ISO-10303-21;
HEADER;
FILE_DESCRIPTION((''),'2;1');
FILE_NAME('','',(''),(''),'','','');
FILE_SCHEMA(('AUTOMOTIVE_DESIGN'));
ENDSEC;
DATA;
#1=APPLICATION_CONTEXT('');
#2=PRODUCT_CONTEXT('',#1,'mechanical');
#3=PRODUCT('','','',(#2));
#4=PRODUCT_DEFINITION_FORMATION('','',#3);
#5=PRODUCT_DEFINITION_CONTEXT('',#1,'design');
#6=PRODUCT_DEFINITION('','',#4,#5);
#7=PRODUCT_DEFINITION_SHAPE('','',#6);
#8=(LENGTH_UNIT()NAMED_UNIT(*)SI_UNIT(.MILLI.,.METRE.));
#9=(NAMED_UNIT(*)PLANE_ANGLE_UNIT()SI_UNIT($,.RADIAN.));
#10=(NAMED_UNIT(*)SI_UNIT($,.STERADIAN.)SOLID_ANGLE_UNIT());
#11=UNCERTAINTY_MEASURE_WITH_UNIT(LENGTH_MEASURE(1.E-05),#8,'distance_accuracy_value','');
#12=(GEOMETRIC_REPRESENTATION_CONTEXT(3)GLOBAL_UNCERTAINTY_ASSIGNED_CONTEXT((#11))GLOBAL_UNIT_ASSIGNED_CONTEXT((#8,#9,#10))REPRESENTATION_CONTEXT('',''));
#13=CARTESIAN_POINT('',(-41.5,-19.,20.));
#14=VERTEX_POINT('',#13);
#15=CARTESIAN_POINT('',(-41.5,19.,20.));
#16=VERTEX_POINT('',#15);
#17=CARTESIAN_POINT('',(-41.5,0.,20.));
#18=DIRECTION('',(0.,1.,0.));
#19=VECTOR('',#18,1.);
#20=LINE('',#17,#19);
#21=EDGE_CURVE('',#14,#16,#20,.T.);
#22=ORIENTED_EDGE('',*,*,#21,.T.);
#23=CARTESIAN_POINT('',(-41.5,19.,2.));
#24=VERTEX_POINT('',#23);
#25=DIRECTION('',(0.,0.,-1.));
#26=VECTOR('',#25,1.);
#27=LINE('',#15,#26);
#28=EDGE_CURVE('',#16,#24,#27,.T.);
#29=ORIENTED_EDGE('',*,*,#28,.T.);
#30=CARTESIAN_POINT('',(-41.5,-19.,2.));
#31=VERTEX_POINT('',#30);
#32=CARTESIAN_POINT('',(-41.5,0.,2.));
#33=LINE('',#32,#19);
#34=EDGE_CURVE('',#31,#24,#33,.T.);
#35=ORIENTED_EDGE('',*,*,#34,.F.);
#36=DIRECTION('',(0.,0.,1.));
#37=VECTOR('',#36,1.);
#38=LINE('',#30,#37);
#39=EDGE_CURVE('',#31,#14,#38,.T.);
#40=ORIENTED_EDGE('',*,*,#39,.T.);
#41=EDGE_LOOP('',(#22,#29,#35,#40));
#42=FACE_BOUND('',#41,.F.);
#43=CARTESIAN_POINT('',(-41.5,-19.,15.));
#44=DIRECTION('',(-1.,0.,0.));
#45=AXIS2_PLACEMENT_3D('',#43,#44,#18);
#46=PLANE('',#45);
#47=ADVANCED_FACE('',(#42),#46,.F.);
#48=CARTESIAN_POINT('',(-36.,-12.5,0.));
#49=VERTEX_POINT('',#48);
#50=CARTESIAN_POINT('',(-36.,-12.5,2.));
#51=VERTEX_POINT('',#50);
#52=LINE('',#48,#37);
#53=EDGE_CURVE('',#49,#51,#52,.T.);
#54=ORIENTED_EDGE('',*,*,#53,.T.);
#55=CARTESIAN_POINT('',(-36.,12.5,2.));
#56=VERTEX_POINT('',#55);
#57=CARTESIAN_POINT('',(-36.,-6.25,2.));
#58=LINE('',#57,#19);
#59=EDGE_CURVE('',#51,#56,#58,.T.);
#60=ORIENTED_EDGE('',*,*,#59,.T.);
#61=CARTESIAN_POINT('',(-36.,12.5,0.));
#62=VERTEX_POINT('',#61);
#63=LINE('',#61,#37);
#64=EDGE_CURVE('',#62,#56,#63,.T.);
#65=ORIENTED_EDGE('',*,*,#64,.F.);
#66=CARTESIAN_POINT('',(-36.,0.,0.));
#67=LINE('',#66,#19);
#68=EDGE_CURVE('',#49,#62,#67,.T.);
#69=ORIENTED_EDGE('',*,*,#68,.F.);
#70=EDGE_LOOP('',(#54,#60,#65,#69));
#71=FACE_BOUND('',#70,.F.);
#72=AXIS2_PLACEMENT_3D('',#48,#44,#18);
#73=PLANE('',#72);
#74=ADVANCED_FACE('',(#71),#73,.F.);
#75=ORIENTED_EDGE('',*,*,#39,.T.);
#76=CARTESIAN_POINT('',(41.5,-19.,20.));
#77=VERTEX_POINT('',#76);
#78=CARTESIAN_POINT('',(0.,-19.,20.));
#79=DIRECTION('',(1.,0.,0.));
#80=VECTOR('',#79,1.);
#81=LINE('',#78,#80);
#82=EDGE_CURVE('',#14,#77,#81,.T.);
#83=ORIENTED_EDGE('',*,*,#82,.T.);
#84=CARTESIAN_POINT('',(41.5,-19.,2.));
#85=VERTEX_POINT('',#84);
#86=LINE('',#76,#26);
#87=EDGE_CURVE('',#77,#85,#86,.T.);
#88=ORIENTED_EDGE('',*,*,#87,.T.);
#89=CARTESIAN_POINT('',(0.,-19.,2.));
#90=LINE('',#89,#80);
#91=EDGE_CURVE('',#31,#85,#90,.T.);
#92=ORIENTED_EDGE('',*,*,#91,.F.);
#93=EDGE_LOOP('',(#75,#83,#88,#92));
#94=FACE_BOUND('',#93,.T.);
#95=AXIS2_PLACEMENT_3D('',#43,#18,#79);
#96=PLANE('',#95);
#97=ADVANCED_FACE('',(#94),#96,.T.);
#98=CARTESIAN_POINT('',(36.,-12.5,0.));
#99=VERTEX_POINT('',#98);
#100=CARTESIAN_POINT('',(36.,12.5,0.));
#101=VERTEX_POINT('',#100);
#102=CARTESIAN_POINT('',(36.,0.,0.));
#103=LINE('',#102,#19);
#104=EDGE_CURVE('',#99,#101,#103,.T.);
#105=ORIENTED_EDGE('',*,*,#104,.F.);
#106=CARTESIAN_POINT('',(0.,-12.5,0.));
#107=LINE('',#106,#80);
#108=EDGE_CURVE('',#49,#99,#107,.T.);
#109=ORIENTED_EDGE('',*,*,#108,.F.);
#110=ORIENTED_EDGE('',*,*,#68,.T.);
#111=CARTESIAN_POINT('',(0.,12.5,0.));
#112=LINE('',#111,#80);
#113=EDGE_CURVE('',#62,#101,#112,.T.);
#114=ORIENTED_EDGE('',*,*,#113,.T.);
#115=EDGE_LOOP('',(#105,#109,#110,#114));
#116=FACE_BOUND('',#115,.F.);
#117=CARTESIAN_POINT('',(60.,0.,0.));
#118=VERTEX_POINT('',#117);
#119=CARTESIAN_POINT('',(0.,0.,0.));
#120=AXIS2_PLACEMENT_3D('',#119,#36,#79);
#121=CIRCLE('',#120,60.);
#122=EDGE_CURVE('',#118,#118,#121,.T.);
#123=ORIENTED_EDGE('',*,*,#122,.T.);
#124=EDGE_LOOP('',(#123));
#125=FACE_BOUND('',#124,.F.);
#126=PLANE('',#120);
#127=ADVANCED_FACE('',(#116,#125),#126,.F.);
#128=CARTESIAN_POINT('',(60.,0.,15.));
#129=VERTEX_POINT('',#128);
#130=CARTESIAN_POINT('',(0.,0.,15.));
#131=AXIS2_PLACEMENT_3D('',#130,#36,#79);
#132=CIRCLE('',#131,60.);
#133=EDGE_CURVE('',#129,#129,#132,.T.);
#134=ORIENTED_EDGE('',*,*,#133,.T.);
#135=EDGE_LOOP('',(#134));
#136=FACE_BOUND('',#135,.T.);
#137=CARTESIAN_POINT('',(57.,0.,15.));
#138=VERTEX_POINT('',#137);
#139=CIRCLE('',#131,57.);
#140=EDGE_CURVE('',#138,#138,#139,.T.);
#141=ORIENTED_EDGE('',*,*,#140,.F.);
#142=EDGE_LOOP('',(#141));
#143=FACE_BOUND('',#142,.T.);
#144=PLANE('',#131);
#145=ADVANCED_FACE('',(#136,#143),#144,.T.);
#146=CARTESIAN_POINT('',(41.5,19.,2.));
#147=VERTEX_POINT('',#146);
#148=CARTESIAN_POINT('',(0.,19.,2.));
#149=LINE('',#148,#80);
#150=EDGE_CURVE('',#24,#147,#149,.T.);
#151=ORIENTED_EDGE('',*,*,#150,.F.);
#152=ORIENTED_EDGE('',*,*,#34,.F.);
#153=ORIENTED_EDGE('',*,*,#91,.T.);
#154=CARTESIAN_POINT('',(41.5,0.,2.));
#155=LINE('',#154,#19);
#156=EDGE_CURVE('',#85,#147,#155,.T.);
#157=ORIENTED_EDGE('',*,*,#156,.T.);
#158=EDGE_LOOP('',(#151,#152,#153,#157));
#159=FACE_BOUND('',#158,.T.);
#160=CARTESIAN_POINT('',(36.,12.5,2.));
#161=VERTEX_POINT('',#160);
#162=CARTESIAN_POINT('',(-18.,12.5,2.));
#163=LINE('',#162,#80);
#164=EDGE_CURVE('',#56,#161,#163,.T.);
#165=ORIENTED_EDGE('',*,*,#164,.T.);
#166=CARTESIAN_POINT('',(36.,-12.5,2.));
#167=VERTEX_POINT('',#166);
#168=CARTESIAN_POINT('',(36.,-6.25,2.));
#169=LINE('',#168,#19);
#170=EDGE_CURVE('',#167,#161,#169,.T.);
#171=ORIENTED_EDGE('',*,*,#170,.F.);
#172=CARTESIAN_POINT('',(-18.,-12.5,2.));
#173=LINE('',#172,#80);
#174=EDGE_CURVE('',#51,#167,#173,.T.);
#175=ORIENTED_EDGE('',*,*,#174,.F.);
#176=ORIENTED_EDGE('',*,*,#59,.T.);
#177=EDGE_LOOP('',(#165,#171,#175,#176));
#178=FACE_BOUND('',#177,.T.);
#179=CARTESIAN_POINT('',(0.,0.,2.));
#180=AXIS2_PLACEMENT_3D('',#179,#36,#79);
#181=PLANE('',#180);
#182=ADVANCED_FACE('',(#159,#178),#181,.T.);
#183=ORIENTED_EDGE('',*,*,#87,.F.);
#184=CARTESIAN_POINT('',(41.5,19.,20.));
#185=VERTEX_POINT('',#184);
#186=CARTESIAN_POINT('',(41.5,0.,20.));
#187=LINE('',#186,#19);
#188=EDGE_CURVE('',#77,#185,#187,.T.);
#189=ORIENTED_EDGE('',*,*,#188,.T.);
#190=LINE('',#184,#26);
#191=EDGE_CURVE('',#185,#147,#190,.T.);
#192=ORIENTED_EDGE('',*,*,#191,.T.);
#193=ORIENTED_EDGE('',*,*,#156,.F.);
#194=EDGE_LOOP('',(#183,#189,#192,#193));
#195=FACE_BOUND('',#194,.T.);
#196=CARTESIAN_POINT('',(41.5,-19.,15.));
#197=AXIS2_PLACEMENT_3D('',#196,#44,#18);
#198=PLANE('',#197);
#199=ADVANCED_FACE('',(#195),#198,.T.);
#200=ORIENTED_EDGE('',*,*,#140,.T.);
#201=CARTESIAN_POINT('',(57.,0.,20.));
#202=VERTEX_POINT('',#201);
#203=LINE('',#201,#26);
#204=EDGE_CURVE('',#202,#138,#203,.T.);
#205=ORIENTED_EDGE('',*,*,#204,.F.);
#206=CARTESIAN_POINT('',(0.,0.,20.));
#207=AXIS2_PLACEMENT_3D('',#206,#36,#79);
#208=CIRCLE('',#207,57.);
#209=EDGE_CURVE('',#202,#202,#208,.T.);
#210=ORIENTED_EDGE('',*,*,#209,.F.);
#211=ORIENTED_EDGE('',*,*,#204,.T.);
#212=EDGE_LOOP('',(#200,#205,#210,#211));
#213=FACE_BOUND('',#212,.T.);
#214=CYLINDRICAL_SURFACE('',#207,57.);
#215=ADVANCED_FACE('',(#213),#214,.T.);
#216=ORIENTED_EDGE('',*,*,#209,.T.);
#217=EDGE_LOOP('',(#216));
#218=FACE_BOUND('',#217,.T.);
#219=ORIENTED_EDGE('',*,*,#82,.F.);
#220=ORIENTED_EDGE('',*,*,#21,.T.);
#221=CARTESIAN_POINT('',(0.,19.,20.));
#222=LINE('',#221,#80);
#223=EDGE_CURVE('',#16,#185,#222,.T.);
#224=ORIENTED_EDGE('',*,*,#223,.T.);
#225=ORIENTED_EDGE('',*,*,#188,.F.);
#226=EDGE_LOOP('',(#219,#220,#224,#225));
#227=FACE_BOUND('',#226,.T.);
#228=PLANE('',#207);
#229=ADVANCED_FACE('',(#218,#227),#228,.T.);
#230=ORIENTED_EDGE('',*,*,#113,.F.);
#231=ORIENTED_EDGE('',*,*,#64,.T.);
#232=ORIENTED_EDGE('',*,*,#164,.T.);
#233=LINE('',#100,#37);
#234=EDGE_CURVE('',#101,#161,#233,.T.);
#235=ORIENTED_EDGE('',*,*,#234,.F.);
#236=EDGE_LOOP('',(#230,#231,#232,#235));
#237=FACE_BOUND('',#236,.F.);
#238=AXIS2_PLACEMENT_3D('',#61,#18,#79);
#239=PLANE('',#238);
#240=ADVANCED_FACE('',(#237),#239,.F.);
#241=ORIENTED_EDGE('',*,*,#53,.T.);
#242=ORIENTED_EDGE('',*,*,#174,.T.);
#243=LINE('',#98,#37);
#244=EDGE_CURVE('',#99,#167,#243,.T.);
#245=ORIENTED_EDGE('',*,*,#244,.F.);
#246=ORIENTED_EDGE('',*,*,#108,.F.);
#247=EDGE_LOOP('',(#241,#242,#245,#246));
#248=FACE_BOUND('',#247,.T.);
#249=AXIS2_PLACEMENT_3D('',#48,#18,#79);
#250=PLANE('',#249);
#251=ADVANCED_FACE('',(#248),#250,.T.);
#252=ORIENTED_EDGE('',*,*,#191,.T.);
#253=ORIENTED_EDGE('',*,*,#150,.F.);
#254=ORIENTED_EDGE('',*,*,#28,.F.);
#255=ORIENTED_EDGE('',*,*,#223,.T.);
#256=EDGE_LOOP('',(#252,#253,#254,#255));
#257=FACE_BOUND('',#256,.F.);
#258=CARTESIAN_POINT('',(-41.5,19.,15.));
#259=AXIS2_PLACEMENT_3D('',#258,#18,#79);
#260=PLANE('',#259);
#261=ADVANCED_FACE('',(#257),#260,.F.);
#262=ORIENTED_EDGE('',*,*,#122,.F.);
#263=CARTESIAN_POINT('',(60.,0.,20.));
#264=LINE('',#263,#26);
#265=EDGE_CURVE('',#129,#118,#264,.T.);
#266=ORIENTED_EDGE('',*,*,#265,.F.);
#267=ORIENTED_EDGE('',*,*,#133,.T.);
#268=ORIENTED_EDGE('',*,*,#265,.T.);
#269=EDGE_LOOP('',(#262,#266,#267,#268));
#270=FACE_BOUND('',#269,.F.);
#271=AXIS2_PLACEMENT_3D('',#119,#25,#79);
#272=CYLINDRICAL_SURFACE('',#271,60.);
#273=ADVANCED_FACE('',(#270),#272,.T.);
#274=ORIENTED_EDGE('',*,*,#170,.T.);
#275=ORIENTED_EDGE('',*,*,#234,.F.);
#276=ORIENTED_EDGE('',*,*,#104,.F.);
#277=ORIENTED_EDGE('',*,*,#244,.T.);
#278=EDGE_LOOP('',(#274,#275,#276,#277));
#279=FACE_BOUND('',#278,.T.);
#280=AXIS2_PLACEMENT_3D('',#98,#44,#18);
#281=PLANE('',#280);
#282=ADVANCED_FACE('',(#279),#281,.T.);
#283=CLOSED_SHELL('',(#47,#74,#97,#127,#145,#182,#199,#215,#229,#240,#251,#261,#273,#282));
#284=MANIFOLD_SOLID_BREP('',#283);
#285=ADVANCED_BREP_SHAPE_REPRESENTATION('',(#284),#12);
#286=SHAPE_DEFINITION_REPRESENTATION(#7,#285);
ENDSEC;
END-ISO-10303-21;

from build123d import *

# Parameters (mm, degrees)
F0_R           = 60
F0_R_2         = 57
F2_DEPTH       = 15
F1_R           = 57
F1_R_2         = 54
F3_DEPTH       = 20
F4_R           = 57
F5_DEPTH       = 10
F7_R           = 54
F8_DEPTH       = 40
F9_W           = 15
F9_H           = 10
F10_DEPTH      = 279.5
F11_DEPTH      = 71.5
F13_R          = 60
F14_DEPTH      = 20
F15_W          = 72
F15_H          = 25
F16_DEPTH      = 20
F17_W          = 83
F17_H          = 38
F18_DEPTH      = 13
F18_DEPTH_BACK = 5
F19_R          = 60
F19_R_2        = 57
F20_DEPTH      = 5


# Not quite as in the source:
# - a feature names something its author has since deleted; it is built from what else it names


with BuildPart() as f2:
    # F0 (on Top) → F2 (new body)
    with BuildSketch(Plane.XY):
        Circle(F0_R)
        Circle(F0_R_2, mode=Mode.SUBTRACT)
    extrude(amount=F2_DEPTH)

    # F1 (on Top) → F3 (join)
    with BuildSketch(Plane.XY):
        Circle(F1_R)
        Circle(F1_R_2, mode=Mode.SUBTRACT)
    extrude(amount=F3_DEPTH)

    # F4 (on Top) → F5 (join)
    with BuildSketch(Plane.XY):
        Circle(F4_R)
    extrude(amount=F5_DEPTH)

    # F7 (on offset) → F8 (cut)
    with BuildSketch(Plane.XY.offset(45)):
        Circle(F7_R)
    extrude(amount=-F8_DEPTH, mode=Mode.SUBTRACT)

    # F9 (on Right) → F10 (cut)
    with BuildSketch(Plane.YZ):
        with Locations((32.5, 60)):
            Rectangle(F9_W, F9_H)
    extrude(amount=F10_DEPTH, mode=Mode.SUBTRACT)

    # F1 (on Top) → F11 (cut)
    with BuildSketch(Plane.XY):
        Circle(F1_R_2)
    extrude(amount=F11_DEPTH, mode=Mode.SUBTRACT)

    # F13 (on Top) → F14 (join)
    with BuildSketch(Plane.XY):
        Circle(F13_R)
    extrude(amount=F14_DEPTH)

    # F15 (on Top) → F16 (cut)
    with BuildSketch(Plane.XY):
        Rectangle(F15_W, F15_H)
    extrude(amount=F16_DEPTH, mode=Mode.SUBTRACT)

    # F17 (on offset) → F18 (cut, two sides)
    with BuildSketch(Plane.XY.offset(15)) as f18_sk:
        Rectangle(F17_W, F17_H)
    extrude(amount=-F18_DEPTH, mode=Mode.SUBTRACT)
    extrude(f18_sk.sketch, amount=F18_DEPTH_BACK, mode=Mode.SUBTRACT)

    # F19 (on face) → F20 (cut)
    with BuildSketch(Plane.XY.offset(20)):
        Circle(F19_R)
        Circle(F19_R_2, mode=Mode.SUBTRACT)
    extrude(amount=-F20_DEPTH, mode=Mode.SUBTRACT)


solid = f2.part
